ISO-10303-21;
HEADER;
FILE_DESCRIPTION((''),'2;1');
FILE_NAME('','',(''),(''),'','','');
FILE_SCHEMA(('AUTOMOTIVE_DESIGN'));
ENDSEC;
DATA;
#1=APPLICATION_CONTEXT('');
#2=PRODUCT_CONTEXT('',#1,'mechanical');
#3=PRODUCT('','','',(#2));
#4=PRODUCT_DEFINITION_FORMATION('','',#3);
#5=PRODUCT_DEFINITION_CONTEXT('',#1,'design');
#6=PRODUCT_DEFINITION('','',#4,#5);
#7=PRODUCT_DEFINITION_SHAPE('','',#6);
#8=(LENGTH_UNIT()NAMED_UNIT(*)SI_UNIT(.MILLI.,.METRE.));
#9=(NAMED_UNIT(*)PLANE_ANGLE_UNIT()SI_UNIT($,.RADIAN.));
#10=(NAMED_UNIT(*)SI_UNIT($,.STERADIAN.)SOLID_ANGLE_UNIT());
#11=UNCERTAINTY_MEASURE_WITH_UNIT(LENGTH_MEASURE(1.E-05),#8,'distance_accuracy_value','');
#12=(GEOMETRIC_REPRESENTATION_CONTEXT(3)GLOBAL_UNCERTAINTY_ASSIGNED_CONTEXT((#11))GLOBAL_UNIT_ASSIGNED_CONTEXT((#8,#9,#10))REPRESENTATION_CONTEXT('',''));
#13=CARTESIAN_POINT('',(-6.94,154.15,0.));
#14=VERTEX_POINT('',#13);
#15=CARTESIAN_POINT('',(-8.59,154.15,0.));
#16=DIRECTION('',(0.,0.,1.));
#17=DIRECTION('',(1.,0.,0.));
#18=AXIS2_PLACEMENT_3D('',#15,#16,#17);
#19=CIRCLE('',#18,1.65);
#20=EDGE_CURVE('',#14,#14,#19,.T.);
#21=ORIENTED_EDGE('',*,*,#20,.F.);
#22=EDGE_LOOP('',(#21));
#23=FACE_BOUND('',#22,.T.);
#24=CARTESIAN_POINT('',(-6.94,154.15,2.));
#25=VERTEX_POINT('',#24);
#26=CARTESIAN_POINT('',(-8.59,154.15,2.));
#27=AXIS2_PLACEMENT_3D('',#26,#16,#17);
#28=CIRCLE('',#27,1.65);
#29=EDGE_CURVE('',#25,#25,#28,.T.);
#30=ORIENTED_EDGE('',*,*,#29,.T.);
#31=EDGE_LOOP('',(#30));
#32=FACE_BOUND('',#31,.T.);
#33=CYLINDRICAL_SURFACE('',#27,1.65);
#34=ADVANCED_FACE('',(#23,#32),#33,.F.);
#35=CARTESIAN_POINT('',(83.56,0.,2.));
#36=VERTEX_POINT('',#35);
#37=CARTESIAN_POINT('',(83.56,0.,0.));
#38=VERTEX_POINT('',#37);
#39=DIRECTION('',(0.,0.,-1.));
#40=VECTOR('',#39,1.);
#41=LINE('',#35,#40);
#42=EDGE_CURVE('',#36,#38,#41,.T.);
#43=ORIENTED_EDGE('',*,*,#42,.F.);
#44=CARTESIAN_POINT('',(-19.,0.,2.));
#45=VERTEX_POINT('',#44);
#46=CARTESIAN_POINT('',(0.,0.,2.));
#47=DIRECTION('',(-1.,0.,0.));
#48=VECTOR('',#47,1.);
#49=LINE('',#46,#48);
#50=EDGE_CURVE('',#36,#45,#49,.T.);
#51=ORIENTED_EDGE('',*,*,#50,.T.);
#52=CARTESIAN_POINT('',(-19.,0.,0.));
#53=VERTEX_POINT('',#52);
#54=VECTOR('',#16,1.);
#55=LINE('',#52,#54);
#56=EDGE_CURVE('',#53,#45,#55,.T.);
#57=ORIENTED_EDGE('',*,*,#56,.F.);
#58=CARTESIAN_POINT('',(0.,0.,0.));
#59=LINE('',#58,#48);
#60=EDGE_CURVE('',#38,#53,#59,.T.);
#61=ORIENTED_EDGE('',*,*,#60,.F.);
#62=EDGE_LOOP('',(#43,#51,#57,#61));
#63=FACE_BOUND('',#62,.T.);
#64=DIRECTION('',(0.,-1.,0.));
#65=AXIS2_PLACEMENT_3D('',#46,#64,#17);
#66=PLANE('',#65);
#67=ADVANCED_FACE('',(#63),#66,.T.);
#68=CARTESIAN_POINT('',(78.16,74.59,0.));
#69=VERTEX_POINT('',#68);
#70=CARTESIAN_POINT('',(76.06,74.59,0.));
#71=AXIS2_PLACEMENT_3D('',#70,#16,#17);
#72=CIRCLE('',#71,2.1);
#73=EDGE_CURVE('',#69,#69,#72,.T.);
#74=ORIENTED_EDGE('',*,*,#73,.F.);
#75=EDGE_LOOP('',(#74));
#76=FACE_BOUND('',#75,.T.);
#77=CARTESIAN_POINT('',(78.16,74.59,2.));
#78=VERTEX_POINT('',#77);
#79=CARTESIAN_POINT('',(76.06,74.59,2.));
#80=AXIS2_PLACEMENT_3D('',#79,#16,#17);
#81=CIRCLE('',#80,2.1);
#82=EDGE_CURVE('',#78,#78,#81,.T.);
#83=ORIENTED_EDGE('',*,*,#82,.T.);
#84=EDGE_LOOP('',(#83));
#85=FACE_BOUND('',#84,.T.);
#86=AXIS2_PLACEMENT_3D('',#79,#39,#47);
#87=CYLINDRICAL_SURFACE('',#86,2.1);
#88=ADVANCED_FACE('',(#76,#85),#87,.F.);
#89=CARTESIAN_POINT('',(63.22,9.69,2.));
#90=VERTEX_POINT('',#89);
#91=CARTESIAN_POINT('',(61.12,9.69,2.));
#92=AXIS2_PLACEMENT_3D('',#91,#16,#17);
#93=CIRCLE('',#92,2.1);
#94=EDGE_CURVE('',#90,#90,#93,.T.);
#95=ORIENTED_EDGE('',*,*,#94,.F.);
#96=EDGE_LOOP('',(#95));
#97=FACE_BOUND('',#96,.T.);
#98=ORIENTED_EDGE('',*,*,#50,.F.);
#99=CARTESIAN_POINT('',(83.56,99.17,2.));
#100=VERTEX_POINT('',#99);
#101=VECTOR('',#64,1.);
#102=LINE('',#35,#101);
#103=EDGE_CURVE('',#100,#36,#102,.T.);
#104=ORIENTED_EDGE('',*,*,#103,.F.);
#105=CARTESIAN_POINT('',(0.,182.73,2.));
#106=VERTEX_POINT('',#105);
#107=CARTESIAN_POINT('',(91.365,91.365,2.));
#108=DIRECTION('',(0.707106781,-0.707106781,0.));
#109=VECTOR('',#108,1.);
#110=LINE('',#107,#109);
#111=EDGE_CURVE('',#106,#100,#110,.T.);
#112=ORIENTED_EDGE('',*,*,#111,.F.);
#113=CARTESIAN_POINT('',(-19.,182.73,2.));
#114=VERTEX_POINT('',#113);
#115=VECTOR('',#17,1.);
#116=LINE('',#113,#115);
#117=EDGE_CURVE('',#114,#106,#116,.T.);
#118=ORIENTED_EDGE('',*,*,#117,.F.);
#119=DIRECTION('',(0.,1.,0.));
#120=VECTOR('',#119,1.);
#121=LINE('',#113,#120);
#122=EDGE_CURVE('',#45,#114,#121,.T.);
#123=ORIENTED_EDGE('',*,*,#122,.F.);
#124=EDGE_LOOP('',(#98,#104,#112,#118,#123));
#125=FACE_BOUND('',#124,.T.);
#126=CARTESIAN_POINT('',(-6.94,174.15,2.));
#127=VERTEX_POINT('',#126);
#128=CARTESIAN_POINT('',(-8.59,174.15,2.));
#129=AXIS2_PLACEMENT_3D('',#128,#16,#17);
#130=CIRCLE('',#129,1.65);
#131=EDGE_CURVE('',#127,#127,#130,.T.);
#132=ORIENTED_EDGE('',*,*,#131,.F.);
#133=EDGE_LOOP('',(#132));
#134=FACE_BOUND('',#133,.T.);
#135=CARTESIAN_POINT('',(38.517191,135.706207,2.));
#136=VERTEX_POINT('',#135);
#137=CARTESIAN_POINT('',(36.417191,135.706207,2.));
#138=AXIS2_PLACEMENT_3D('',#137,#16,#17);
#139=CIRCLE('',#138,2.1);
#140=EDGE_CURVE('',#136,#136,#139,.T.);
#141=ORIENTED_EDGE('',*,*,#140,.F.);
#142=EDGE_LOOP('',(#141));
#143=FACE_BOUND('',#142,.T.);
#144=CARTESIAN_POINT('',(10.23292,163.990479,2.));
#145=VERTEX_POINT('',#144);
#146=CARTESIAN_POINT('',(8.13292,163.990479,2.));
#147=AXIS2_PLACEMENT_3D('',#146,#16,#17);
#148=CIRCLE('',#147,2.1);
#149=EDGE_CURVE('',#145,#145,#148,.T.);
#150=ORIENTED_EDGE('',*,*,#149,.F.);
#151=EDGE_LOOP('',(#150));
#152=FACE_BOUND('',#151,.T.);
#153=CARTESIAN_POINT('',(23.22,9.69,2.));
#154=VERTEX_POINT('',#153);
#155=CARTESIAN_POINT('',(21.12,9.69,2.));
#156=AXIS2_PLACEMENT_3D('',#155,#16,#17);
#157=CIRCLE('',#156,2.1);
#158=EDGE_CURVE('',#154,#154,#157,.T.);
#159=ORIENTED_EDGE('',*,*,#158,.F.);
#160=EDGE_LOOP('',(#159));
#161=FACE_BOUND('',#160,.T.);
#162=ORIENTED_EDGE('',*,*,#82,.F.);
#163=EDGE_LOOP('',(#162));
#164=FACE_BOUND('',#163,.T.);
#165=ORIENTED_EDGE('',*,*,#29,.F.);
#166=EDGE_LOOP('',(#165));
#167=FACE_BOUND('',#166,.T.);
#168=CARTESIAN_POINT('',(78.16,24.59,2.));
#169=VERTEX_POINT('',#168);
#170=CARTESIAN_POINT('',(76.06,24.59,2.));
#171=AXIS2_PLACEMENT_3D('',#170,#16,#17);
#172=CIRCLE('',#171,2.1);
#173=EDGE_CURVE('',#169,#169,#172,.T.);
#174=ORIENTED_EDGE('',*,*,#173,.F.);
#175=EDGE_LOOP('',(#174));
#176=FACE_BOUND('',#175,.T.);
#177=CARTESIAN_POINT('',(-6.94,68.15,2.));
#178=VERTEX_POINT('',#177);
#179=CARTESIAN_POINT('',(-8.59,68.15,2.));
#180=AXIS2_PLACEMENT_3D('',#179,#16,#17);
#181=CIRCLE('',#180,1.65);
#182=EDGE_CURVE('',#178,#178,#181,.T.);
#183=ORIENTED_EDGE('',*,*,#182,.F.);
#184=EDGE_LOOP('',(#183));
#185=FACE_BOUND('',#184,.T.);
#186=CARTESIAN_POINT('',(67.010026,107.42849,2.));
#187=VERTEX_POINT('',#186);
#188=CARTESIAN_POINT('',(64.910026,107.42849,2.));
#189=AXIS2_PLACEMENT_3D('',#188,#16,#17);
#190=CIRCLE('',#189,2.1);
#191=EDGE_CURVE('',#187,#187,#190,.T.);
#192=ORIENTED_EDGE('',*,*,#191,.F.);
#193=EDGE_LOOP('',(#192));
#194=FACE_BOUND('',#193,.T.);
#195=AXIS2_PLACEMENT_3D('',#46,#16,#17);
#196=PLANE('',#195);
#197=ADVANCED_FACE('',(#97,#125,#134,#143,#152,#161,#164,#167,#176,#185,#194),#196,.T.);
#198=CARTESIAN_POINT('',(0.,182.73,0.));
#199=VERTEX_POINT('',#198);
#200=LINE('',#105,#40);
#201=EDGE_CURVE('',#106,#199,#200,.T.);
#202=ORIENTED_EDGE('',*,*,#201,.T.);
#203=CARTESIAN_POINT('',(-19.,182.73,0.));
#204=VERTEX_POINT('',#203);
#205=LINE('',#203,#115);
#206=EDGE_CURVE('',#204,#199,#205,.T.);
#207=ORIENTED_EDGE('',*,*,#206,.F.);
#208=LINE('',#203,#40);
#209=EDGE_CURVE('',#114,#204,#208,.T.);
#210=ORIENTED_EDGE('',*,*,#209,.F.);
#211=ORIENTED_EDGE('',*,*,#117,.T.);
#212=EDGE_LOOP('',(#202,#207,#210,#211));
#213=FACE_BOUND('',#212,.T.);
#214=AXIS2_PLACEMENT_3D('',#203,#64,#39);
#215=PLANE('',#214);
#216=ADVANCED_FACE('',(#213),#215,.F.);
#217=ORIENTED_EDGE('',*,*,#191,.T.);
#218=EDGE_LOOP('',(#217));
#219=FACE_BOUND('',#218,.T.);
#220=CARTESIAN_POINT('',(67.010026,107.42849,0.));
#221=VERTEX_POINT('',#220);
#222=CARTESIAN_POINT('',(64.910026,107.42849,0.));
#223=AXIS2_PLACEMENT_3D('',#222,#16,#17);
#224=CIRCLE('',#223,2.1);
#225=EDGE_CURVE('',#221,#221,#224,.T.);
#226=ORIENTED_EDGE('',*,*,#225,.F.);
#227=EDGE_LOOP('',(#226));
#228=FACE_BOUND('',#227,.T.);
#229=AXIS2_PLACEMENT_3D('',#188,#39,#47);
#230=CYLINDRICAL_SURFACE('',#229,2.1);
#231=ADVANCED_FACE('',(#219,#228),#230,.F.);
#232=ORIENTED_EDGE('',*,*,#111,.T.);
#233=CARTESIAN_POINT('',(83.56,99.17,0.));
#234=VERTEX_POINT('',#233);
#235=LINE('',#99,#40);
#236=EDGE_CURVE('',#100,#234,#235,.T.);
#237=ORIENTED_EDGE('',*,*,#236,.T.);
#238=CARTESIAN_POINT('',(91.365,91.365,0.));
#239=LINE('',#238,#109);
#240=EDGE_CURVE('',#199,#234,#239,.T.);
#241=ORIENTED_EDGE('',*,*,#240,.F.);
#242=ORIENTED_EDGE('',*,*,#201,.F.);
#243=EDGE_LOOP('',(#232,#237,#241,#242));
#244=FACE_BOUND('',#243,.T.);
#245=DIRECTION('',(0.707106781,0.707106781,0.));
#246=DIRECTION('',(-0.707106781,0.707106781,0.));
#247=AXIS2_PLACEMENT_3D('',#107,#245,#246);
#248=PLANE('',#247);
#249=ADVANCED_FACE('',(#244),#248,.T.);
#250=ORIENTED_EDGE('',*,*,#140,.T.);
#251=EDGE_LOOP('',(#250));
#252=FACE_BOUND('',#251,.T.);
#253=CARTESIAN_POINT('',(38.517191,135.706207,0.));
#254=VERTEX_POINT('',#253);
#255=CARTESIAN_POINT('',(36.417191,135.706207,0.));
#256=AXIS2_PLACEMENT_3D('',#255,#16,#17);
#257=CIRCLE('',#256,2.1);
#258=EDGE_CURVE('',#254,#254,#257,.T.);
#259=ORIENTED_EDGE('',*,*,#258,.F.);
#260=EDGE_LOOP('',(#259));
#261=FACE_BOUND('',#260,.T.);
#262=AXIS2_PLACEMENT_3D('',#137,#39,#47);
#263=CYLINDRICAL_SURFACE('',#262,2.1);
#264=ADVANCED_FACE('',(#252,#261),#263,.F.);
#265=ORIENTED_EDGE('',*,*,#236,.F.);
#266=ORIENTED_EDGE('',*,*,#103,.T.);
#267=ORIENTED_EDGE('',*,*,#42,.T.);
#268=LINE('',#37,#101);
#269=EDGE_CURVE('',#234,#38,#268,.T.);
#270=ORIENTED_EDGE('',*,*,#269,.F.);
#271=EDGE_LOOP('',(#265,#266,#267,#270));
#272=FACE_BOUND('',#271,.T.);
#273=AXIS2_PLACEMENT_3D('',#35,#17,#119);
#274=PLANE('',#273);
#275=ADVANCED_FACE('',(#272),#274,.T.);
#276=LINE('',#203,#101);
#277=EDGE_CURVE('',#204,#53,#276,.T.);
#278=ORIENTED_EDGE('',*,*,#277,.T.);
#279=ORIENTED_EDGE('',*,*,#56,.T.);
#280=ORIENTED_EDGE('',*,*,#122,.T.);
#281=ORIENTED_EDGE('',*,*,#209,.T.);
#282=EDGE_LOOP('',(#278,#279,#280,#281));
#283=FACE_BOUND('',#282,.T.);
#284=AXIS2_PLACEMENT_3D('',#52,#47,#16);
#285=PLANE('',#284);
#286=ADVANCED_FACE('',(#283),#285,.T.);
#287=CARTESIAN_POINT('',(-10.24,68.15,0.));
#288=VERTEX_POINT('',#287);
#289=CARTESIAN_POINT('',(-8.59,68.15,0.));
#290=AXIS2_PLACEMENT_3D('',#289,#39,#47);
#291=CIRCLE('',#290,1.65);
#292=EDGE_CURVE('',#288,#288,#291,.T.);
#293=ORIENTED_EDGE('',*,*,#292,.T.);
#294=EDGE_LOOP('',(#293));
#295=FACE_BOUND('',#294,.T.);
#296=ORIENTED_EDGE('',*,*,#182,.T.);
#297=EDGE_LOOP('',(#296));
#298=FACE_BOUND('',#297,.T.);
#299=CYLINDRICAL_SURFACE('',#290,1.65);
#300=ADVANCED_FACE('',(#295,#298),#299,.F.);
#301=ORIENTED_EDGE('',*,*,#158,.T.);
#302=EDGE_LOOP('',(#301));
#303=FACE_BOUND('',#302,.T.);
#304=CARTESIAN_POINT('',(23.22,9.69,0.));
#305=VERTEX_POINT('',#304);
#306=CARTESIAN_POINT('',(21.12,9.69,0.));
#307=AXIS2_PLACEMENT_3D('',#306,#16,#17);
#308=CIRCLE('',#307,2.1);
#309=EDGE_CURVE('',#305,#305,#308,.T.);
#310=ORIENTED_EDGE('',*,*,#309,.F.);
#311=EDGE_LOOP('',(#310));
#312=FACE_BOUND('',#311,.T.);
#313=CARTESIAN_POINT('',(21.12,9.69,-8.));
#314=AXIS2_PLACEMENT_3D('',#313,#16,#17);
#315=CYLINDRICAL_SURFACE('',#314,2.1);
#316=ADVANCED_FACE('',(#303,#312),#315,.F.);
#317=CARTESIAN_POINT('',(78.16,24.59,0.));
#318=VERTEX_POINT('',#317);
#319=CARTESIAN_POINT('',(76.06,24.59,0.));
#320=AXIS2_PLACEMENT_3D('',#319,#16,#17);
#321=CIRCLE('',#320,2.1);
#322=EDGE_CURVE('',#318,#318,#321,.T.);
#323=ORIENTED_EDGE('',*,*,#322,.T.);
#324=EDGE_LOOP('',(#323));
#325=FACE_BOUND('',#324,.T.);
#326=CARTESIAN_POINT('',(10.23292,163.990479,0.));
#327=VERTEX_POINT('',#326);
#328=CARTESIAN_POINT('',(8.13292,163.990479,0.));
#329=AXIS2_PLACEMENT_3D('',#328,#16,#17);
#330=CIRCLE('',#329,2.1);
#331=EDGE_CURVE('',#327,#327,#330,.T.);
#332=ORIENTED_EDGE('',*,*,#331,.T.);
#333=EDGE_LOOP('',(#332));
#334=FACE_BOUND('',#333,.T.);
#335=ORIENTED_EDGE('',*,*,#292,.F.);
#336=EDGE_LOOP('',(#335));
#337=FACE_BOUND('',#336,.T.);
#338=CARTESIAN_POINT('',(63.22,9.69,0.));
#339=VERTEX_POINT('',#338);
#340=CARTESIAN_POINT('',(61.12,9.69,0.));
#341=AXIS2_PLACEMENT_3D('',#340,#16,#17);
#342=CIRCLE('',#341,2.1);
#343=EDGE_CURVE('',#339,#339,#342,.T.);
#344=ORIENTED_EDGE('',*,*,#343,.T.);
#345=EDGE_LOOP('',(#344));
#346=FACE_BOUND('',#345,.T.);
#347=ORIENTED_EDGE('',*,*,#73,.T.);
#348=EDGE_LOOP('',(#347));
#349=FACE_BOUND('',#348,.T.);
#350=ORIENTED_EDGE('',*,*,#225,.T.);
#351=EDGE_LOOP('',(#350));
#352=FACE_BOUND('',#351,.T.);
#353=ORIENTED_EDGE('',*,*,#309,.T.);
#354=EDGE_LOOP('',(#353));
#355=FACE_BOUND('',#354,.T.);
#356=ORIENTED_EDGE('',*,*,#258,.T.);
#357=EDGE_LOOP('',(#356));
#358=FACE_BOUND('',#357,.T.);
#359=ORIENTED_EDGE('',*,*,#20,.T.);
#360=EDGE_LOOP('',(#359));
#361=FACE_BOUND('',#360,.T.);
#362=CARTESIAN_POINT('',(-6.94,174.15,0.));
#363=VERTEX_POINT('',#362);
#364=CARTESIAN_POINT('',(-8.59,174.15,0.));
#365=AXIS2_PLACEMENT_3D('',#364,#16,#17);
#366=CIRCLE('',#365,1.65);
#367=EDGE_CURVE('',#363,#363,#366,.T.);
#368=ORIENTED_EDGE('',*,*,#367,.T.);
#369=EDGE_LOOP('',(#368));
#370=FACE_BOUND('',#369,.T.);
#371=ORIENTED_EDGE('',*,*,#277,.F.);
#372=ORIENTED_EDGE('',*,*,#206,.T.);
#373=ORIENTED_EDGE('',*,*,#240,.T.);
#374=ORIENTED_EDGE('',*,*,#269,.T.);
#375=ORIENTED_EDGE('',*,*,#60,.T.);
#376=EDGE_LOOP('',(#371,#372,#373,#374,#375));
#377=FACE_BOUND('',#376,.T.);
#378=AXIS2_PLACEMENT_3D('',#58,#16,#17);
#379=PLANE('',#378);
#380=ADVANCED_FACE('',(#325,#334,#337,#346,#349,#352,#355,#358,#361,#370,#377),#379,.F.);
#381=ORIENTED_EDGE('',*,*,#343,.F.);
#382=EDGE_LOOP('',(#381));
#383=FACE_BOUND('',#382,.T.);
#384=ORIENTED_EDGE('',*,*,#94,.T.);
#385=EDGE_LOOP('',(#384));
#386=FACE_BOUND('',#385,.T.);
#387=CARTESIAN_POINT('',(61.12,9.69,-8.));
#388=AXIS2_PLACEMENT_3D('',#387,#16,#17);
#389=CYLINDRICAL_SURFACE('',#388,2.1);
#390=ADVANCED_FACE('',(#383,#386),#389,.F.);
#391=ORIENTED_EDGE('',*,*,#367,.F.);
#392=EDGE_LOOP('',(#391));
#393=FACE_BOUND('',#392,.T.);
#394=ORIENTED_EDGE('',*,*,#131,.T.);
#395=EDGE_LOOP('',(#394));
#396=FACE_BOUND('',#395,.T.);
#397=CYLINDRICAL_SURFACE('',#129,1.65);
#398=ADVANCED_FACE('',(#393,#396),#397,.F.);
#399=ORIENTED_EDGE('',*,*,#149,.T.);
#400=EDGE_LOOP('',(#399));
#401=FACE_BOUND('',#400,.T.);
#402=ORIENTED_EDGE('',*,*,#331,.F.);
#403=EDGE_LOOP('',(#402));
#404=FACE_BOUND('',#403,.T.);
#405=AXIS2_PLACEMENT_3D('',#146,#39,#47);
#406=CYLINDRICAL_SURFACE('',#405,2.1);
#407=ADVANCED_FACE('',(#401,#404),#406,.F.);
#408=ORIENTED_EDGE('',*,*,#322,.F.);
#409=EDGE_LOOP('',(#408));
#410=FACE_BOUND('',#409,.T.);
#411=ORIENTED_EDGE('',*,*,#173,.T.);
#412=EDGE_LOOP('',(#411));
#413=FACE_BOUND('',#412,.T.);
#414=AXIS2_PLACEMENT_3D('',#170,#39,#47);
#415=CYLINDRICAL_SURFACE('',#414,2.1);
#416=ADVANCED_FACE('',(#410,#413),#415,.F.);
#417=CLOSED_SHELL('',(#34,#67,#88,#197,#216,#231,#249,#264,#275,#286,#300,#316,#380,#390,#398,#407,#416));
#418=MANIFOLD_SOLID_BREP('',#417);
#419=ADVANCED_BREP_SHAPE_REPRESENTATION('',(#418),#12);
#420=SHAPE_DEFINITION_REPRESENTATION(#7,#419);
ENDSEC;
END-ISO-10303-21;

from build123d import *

# Parameters (mm, degrees)
SKETCH_1_R          = 2.1
EXTRUDE_1_DEPTH     = 2
SKETCH_2_R          = 2.1
CUT_EXTRUDE_1_DEPTH = 10
M4X0_7_1_OUTLINE_W  = 19
M4X0_7_1_OUTLINE_H  = 182.73
M4X0_7_1_OUTLINE_R  = 1.65
M4X0_7_1_DEPTH      = 2


# Read off the part's stored shape, not the designer's step: M4x0.7 ねじ穴1
with BuildPart() as part:
    # ｽｹｯﾁ1 → ﾎﾞｽ - 押し出し1 (new body)
    with BuildSketch(Plane.XY):
        Polygon((0, 0), (0, 182.73), (83.56, 99.17), (83.56, 0), align=None)
        with Locations((8.132919651, 163.990478631)):
            Circle(SKETCH_1_R, mode=Mode.SUBTRACT)
        with Locations((36.417190898, 135.706207384)):
            Circle(SKETCH_1_R, mode=Mode.SUBTRACT)
        with Locations((64.91002614, 107.428490375)):
            Circle(SKETCH_1_R, mode=Mode.SUBTRACT)
        with Locations((76.06, 74.59)):
            Circle(SKETCH_1_R, mode=Mode.SUBTRACT)
        with Locations((76.06, 24.59)):
            Circle(SKETCH_1_R, mode=Mode.SUBTRACT)
    extrude(amount=EXTRUDE_1_DEPTH)

    # ｽｹｯﾁ2 → ｶｯﾄ - 押し出し1 (cut)
    with BuildSketch(Plane.XY.offset(2)):
        with Locations((21.12, 9.69)):
            Circle(SKETCH_2_R)
        with Locations((61.12, 9.69)):
            Circle(SKETCH_2_R)
    extrude(amount=-CUT_EXTRUDE_1_DEPTH, mode=Mode.SUBTRACT)

    # M4x0.7 ねじ穴1 outline → M4x0.7 ねじ穴1 (add)
    with BuildSketch(Plane.XY):
        with Locations((-9.5, 91.365)):
            Rectangle(M4X0_7_1_OUTLINE_W, M4X0_7_1_OUTLINE_H)
        with Locations((-8.59, 68.15)):
            Circle(M4X0_7_1_OUTLINE_R, mode=Mode.SUBTRACT)
        with Locations((-8.59, 154.15)):
            Circle(M4X0_7_1_OUTLINE_R, mode=Mode.SUBTRACT)
        with Locations((-8.59, 174.15)):
            Circle(M4X0_7_1_OUTLINE_R, mode=Mode.SUBTRACT)
    extrude(amount=M4X0_7_1_DEPTH)


solid = part.part
